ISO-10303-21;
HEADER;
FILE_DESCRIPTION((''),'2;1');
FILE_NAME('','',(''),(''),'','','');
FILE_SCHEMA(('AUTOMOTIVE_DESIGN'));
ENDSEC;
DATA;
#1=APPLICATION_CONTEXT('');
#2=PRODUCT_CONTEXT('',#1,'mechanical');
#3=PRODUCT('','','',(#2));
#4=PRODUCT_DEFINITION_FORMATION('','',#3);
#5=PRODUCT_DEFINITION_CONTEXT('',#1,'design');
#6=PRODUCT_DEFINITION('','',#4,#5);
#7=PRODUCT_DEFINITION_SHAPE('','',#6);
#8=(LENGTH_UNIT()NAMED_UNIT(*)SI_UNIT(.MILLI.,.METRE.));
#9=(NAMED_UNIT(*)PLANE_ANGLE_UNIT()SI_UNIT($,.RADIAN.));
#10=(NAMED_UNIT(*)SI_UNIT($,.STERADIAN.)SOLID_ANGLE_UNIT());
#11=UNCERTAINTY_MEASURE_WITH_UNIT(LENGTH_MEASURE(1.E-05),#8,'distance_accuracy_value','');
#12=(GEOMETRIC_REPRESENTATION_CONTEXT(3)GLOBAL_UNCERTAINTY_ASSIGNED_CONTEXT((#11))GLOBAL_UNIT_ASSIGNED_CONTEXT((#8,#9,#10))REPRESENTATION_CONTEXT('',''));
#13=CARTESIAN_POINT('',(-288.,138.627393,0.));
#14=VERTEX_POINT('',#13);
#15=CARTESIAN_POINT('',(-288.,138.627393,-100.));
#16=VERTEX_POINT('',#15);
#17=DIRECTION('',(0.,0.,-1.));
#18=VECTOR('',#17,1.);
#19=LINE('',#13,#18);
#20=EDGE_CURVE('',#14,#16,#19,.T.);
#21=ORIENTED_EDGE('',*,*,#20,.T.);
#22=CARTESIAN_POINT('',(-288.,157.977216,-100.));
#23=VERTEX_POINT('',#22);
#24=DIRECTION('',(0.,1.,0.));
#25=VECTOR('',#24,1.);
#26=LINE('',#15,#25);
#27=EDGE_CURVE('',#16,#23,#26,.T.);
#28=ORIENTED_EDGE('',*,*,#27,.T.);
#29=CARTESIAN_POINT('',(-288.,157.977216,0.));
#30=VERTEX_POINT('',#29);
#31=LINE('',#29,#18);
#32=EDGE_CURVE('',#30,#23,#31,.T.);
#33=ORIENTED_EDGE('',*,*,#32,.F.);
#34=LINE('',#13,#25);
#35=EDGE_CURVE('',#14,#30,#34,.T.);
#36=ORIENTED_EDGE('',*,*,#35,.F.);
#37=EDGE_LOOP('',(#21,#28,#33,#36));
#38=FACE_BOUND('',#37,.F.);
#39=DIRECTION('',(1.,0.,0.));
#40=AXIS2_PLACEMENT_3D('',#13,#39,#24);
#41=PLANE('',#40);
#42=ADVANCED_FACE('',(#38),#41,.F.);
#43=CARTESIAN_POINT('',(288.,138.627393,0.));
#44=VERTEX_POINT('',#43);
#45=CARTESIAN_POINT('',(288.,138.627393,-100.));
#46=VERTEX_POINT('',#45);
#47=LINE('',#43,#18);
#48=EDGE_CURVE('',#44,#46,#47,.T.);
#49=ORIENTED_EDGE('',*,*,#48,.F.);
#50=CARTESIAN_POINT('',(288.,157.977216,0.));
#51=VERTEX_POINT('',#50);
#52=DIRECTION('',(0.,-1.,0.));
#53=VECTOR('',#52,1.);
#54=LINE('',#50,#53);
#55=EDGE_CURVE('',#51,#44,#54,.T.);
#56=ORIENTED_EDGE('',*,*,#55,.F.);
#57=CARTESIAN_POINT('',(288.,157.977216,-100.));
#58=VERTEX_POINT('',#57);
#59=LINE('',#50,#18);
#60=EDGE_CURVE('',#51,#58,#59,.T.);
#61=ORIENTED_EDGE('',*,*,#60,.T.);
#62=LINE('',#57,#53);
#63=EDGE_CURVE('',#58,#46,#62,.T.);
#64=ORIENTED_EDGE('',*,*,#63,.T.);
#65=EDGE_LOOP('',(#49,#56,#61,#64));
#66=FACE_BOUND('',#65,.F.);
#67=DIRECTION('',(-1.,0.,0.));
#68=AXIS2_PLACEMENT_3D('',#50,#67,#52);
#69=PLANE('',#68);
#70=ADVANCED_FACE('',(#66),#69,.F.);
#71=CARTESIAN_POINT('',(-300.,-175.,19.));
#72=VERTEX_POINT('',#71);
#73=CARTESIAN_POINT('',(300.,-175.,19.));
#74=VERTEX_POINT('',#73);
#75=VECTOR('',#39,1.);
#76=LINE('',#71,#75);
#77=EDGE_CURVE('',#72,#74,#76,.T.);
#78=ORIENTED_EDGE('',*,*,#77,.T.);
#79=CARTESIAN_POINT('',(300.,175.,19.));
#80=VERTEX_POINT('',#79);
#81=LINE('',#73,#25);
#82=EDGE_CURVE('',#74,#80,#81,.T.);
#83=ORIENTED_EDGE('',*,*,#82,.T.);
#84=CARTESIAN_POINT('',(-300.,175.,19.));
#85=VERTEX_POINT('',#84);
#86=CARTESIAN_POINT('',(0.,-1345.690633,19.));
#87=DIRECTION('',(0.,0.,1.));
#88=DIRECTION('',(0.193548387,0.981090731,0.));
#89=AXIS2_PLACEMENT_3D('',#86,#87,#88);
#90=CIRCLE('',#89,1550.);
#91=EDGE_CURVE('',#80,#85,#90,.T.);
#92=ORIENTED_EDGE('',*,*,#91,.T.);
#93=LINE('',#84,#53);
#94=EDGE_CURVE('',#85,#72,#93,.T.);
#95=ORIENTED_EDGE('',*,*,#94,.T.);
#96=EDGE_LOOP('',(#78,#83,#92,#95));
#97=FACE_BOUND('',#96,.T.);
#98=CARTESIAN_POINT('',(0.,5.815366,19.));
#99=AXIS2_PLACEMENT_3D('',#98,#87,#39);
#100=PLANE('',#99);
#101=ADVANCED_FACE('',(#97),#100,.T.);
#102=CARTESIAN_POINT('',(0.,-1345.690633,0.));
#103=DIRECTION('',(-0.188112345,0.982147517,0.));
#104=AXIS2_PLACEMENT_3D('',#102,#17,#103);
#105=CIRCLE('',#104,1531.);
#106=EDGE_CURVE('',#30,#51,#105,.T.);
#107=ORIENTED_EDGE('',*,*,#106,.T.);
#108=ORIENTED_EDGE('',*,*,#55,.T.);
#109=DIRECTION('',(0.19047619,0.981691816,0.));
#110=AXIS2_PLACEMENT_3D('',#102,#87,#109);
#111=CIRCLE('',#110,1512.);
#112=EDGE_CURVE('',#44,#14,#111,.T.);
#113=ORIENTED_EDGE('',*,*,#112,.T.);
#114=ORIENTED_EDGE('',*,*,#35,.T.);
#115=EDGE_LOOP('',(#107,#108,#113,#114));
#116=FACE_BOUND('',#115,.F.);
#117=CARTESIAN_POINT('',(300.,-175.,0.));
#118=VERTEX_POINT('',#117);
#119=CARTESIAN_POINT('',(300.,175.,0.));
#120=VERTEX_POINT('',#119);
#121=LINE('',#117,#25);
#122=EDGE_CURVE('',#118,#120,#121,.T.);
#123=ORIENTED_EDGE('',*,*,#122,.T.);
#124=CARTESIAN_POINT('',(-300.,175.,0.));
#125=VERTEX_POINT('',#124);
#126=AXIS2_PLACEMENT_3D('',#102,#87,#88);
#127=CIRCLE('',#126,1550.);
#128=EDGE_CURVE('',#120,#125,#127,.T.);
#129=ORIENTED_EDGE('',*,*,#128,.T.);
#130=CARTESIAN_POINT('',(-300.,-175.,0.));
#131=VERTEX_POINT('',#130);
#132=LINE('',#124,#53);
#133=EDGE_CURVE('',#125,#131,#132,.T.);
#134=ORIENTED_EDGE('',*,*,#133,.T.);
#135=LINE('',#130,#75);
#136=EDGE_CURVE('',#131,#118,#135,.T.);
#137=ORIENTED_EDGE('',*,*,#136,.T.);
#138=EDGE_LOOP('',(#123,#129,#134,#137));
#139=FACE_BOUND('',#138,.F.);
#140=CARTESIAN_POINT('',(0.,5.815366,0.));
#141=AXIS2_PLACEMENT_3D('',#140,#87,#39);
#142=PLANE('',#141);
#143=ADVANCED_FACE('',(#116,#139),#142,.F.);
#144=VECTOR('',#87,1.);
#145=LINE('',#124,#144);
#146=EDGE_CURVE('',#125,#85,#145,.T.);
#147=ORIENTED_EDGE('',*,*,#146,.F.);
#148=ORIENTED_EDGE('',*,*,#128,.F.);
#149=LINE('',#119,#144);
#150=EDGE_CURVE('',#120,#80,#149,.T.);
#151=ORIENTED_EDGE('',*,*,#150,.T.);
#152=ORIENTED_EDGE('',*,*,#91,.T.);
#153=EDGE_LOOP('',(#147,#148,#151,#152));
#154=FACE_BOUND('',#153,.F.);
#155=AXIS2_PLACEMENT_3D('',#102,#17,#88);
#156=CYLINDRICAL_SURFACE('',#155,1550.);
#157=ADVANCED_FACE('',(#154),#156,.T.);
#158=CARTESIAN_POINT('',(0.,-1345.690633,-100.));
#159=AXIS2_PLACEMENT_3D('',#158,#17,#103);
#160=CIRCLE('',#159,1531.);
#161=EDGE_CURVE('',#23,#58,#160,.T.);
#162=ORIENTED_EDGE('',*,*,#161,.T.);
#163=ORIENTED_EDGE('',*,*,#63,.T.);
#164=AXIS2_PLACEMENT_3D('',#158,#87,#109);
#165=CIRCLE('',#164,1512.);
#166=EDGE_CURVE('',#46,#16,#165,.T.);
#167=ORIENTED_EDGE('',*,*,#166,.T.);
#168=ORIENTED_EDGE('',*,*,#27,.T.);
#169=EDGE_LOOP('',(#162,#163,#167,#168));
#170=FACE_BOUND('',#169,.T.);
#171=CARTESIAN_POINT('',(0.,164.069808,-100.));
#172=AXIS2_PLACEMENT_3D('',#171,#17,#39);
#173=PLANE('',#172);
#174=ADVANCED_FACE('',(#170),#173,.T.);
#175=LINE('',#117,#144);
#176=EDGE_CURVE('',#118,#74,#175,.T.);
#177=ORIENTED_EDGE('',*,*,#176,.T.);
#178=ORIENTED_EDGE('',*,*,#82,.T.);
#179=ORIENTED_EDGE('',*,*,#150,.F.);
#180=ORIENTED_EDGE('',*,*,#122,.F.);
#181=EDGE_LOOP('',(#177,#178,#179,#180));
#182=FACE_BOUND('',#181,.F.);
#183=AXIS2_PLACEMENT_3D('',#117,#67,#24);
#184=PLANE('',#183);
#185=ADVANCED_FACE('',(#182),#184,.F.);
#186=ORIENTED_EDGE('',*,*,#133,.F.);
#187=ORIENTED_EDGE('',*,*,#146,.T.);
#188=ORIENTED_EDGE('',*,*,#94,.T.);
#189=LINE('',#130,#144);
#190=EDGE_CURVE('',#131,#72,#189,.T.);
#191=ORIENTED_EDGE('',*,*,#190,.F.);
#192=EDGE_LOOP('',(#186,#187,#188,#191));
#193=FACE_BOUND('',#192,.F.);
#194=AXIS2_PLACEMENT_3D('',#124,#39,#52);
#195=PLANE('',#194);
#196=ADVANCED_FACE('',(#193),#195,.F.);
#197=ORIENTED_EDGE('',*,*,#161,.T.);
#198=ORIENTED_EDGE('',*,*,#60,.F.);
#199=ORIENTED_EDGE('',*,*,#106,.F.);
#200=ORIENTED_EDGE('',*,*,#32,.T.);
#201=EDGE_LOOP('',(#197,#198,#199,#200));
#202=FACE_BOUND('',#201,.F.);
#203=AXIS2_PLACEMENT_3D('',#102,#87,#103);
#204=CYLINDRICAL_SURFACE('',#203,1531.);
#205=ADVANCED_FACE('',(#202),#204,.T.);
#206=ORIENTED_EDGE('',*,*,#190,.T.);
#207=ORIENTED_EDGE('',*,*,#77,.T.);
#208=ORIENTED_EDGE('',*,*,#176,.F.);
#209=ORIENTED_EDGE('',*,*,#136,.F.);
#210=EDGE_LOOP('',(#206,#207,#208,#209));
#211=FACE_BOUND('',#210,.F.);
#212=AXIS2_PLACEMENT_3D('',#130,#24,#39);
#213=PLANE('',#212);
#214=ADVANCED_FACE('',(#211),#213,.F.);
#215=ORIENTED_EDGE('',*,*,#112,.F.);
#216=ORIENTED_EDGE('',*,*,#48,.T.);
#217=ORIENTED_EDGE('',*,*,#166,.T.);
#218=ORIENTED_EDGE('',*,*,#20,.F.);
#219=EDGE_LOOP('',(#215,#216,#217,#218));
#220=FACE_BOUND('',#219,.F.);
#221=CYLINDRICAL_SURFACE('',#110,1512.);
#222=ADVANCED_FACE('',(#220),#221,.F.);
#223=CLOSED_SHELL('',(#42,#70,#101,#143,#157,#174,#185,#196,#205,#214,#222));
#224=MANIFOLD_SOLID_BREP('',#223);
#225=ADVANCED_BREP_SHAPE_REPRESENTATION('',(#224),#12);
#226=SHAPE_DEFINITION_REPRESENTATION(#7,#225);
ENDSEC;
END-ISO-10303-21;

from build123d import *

# Parameters (mm, degrees)
F1_DEPTH = 19
F3_DEPTH = 100


# Not quite as in the source:
# - a feature of the source that left no trace in its solid (it failed there, or was rolled back) is left out


with BuildPart() as f1:
    # F0 (on Top) → F1 (new body)
    with BuildSketch(Plane.XY):
        with BuildLine():
            Line((-300, -175), (300, -175))
            Line((300, -175), (300, 175))
            ThreePointArc((300, 175), (0, 204.3093674254), (-300, 175))
            Line((-300, 175), (-300, -175))
        make_face()
    extrude(amount=F1_DEPTH)

    # F2 (on face) → F3 (join)
    with BuildSketch(Plane(origin=(0, 0, 0), x_dir=(1, 0, 0), z_dir=(0, 0, -1))):
        with BuildLine():
            Line((-288, -138.6273926478), (-288, -157.9772163868))
            ThreePointArc((-288, -157.9772163868), (0, -185.3093674254), (288, -157.9772163868))
            Line((288, -157.9772163868), (288, -138.6273926478))
            ThreePointArc((288, -138.6273926478), (0, -166.3093674254), (-288, -138.6273926478))
        make_face()
    extrude(amount=F3_DEPTH)


solid = f1.part
